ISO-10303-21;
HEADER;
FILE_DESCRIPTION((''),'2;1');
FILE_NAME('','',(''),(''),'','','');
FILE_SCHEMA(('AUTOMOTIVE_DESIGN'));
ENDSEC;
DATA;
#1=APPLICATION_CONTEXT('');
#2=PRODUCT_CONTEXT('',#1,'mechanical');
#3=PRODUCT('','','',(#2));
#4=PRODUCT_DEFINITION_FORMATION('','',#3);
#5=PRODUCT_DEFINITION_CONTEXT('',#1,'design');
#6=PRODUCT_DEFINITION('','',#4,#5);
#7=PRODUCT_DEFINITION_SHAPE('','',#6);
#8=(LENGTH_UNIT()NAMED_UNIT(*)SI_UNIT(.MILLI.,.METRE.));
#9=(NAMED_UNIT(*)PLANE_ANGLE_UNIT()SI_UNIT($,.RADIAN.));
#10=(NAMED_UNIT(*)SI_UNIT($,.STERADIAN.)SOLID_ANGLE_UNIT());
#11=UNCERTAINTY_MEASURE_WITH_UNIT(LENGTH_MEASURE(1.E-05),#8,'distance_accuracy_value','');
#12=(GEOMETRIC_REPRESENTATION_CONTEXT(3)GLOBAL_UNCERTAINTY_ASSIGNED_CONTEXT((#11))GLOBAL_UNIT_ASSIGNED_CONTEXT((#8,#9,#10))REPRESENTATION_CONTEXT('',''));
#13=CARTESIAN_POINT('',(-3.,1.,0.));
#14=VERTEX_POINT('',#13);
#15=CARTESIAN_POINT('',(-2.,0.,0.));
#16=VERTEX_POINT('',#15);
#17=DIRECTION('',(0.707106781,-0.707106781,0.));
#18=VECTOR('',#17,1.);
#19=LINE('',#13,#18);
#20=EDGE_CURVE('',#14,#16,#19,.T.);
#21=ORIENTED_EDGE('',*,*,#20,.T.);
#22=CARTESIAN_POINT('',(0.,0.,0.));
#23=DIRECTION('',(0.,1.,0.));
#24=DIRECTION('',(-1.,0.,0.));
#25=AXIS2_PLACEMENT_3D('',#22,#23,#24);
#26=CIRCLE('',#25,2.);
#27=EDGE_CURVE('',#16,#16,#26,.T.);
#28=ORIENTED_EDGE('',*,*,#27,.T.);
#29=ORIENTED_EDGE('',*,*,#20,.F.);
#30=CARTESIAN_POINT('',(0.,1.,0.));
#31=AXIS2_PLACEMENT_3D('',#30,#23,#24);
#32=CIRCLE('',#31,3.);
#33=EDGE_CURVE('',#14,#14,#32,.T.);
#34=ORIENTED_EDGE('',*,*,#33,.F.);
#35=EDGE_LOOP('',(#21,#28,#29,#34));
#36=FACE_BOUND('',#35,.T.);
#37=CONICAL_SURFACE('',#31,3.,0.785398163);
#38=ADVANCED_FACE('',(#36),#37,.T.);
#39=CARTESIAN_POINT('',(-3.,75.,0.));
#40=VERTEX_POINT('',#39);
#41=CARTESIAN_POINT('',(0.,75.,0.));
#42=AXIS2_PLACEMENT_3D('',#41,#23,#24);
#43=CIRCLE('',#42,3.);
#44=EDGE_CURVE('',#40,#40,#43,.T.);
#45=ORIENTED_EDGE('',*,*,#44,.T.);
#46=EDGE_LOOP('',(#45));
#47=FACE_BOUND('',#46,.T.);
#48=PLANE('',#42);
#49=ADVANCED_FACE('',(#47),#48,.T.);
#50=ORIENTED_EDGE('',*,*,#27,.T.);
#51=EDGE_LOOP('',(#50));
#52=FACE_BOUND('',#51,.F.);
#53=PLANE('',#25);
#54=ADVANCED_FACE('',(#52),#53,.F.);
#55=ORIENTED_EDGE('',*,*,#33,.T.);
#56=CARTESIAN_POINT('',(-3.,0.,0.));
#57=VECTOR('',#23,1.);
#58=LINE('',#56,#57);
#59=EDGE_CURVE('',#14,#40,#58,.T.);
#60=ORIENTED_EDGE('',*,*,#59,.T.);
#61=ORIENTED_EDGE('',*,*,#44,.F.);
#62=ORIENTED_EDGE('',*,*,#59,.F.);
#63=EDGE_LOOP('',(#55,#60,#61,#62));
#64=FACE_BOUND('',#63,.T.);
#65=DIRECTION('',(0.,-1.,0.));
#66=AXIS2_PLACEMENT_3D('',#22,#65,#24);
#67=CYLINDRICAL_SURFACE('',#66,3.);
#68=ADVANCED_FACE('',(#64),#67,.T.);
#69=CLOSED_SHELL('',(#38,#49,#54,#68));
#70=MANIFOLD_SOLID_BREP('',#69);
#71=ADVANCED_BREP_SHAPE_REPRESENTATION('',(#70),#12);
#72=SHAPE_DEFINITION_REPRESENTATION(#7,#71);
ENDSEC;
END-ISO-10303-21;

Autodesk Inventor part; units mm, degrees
ref_plane "YZ Plane" through (0, 0, 0) normal (1, 0, 0) x (0, 1, 0)
ref_plane "XZ Plane" through (0, 0, 0) normal (0, 1, 0) x (-1, 0, 0)
ref_plane "XY Plane" through (0, 0, 0) normal (0, 0, 1) x (1, 0, 0)
sketch "Sketch1" plane through (0, 0, 0) normal (0, 1, 0) x (-1, 0, 0)
  circle A0 centre (0, 0) radius 3
  dimension "d0" = 6
extrude "Extrusion1" add sketch "Sketch1" along normal blind 75
thread "Thread1" size "M6x1" class "6g" standard "ANSI Metric M Profile" length 7
chamfer "Chamfer1" distance 1 angle 45 1 edges at (3, 0, 0)
properties part number "Rod" material "Stainless Steel"
